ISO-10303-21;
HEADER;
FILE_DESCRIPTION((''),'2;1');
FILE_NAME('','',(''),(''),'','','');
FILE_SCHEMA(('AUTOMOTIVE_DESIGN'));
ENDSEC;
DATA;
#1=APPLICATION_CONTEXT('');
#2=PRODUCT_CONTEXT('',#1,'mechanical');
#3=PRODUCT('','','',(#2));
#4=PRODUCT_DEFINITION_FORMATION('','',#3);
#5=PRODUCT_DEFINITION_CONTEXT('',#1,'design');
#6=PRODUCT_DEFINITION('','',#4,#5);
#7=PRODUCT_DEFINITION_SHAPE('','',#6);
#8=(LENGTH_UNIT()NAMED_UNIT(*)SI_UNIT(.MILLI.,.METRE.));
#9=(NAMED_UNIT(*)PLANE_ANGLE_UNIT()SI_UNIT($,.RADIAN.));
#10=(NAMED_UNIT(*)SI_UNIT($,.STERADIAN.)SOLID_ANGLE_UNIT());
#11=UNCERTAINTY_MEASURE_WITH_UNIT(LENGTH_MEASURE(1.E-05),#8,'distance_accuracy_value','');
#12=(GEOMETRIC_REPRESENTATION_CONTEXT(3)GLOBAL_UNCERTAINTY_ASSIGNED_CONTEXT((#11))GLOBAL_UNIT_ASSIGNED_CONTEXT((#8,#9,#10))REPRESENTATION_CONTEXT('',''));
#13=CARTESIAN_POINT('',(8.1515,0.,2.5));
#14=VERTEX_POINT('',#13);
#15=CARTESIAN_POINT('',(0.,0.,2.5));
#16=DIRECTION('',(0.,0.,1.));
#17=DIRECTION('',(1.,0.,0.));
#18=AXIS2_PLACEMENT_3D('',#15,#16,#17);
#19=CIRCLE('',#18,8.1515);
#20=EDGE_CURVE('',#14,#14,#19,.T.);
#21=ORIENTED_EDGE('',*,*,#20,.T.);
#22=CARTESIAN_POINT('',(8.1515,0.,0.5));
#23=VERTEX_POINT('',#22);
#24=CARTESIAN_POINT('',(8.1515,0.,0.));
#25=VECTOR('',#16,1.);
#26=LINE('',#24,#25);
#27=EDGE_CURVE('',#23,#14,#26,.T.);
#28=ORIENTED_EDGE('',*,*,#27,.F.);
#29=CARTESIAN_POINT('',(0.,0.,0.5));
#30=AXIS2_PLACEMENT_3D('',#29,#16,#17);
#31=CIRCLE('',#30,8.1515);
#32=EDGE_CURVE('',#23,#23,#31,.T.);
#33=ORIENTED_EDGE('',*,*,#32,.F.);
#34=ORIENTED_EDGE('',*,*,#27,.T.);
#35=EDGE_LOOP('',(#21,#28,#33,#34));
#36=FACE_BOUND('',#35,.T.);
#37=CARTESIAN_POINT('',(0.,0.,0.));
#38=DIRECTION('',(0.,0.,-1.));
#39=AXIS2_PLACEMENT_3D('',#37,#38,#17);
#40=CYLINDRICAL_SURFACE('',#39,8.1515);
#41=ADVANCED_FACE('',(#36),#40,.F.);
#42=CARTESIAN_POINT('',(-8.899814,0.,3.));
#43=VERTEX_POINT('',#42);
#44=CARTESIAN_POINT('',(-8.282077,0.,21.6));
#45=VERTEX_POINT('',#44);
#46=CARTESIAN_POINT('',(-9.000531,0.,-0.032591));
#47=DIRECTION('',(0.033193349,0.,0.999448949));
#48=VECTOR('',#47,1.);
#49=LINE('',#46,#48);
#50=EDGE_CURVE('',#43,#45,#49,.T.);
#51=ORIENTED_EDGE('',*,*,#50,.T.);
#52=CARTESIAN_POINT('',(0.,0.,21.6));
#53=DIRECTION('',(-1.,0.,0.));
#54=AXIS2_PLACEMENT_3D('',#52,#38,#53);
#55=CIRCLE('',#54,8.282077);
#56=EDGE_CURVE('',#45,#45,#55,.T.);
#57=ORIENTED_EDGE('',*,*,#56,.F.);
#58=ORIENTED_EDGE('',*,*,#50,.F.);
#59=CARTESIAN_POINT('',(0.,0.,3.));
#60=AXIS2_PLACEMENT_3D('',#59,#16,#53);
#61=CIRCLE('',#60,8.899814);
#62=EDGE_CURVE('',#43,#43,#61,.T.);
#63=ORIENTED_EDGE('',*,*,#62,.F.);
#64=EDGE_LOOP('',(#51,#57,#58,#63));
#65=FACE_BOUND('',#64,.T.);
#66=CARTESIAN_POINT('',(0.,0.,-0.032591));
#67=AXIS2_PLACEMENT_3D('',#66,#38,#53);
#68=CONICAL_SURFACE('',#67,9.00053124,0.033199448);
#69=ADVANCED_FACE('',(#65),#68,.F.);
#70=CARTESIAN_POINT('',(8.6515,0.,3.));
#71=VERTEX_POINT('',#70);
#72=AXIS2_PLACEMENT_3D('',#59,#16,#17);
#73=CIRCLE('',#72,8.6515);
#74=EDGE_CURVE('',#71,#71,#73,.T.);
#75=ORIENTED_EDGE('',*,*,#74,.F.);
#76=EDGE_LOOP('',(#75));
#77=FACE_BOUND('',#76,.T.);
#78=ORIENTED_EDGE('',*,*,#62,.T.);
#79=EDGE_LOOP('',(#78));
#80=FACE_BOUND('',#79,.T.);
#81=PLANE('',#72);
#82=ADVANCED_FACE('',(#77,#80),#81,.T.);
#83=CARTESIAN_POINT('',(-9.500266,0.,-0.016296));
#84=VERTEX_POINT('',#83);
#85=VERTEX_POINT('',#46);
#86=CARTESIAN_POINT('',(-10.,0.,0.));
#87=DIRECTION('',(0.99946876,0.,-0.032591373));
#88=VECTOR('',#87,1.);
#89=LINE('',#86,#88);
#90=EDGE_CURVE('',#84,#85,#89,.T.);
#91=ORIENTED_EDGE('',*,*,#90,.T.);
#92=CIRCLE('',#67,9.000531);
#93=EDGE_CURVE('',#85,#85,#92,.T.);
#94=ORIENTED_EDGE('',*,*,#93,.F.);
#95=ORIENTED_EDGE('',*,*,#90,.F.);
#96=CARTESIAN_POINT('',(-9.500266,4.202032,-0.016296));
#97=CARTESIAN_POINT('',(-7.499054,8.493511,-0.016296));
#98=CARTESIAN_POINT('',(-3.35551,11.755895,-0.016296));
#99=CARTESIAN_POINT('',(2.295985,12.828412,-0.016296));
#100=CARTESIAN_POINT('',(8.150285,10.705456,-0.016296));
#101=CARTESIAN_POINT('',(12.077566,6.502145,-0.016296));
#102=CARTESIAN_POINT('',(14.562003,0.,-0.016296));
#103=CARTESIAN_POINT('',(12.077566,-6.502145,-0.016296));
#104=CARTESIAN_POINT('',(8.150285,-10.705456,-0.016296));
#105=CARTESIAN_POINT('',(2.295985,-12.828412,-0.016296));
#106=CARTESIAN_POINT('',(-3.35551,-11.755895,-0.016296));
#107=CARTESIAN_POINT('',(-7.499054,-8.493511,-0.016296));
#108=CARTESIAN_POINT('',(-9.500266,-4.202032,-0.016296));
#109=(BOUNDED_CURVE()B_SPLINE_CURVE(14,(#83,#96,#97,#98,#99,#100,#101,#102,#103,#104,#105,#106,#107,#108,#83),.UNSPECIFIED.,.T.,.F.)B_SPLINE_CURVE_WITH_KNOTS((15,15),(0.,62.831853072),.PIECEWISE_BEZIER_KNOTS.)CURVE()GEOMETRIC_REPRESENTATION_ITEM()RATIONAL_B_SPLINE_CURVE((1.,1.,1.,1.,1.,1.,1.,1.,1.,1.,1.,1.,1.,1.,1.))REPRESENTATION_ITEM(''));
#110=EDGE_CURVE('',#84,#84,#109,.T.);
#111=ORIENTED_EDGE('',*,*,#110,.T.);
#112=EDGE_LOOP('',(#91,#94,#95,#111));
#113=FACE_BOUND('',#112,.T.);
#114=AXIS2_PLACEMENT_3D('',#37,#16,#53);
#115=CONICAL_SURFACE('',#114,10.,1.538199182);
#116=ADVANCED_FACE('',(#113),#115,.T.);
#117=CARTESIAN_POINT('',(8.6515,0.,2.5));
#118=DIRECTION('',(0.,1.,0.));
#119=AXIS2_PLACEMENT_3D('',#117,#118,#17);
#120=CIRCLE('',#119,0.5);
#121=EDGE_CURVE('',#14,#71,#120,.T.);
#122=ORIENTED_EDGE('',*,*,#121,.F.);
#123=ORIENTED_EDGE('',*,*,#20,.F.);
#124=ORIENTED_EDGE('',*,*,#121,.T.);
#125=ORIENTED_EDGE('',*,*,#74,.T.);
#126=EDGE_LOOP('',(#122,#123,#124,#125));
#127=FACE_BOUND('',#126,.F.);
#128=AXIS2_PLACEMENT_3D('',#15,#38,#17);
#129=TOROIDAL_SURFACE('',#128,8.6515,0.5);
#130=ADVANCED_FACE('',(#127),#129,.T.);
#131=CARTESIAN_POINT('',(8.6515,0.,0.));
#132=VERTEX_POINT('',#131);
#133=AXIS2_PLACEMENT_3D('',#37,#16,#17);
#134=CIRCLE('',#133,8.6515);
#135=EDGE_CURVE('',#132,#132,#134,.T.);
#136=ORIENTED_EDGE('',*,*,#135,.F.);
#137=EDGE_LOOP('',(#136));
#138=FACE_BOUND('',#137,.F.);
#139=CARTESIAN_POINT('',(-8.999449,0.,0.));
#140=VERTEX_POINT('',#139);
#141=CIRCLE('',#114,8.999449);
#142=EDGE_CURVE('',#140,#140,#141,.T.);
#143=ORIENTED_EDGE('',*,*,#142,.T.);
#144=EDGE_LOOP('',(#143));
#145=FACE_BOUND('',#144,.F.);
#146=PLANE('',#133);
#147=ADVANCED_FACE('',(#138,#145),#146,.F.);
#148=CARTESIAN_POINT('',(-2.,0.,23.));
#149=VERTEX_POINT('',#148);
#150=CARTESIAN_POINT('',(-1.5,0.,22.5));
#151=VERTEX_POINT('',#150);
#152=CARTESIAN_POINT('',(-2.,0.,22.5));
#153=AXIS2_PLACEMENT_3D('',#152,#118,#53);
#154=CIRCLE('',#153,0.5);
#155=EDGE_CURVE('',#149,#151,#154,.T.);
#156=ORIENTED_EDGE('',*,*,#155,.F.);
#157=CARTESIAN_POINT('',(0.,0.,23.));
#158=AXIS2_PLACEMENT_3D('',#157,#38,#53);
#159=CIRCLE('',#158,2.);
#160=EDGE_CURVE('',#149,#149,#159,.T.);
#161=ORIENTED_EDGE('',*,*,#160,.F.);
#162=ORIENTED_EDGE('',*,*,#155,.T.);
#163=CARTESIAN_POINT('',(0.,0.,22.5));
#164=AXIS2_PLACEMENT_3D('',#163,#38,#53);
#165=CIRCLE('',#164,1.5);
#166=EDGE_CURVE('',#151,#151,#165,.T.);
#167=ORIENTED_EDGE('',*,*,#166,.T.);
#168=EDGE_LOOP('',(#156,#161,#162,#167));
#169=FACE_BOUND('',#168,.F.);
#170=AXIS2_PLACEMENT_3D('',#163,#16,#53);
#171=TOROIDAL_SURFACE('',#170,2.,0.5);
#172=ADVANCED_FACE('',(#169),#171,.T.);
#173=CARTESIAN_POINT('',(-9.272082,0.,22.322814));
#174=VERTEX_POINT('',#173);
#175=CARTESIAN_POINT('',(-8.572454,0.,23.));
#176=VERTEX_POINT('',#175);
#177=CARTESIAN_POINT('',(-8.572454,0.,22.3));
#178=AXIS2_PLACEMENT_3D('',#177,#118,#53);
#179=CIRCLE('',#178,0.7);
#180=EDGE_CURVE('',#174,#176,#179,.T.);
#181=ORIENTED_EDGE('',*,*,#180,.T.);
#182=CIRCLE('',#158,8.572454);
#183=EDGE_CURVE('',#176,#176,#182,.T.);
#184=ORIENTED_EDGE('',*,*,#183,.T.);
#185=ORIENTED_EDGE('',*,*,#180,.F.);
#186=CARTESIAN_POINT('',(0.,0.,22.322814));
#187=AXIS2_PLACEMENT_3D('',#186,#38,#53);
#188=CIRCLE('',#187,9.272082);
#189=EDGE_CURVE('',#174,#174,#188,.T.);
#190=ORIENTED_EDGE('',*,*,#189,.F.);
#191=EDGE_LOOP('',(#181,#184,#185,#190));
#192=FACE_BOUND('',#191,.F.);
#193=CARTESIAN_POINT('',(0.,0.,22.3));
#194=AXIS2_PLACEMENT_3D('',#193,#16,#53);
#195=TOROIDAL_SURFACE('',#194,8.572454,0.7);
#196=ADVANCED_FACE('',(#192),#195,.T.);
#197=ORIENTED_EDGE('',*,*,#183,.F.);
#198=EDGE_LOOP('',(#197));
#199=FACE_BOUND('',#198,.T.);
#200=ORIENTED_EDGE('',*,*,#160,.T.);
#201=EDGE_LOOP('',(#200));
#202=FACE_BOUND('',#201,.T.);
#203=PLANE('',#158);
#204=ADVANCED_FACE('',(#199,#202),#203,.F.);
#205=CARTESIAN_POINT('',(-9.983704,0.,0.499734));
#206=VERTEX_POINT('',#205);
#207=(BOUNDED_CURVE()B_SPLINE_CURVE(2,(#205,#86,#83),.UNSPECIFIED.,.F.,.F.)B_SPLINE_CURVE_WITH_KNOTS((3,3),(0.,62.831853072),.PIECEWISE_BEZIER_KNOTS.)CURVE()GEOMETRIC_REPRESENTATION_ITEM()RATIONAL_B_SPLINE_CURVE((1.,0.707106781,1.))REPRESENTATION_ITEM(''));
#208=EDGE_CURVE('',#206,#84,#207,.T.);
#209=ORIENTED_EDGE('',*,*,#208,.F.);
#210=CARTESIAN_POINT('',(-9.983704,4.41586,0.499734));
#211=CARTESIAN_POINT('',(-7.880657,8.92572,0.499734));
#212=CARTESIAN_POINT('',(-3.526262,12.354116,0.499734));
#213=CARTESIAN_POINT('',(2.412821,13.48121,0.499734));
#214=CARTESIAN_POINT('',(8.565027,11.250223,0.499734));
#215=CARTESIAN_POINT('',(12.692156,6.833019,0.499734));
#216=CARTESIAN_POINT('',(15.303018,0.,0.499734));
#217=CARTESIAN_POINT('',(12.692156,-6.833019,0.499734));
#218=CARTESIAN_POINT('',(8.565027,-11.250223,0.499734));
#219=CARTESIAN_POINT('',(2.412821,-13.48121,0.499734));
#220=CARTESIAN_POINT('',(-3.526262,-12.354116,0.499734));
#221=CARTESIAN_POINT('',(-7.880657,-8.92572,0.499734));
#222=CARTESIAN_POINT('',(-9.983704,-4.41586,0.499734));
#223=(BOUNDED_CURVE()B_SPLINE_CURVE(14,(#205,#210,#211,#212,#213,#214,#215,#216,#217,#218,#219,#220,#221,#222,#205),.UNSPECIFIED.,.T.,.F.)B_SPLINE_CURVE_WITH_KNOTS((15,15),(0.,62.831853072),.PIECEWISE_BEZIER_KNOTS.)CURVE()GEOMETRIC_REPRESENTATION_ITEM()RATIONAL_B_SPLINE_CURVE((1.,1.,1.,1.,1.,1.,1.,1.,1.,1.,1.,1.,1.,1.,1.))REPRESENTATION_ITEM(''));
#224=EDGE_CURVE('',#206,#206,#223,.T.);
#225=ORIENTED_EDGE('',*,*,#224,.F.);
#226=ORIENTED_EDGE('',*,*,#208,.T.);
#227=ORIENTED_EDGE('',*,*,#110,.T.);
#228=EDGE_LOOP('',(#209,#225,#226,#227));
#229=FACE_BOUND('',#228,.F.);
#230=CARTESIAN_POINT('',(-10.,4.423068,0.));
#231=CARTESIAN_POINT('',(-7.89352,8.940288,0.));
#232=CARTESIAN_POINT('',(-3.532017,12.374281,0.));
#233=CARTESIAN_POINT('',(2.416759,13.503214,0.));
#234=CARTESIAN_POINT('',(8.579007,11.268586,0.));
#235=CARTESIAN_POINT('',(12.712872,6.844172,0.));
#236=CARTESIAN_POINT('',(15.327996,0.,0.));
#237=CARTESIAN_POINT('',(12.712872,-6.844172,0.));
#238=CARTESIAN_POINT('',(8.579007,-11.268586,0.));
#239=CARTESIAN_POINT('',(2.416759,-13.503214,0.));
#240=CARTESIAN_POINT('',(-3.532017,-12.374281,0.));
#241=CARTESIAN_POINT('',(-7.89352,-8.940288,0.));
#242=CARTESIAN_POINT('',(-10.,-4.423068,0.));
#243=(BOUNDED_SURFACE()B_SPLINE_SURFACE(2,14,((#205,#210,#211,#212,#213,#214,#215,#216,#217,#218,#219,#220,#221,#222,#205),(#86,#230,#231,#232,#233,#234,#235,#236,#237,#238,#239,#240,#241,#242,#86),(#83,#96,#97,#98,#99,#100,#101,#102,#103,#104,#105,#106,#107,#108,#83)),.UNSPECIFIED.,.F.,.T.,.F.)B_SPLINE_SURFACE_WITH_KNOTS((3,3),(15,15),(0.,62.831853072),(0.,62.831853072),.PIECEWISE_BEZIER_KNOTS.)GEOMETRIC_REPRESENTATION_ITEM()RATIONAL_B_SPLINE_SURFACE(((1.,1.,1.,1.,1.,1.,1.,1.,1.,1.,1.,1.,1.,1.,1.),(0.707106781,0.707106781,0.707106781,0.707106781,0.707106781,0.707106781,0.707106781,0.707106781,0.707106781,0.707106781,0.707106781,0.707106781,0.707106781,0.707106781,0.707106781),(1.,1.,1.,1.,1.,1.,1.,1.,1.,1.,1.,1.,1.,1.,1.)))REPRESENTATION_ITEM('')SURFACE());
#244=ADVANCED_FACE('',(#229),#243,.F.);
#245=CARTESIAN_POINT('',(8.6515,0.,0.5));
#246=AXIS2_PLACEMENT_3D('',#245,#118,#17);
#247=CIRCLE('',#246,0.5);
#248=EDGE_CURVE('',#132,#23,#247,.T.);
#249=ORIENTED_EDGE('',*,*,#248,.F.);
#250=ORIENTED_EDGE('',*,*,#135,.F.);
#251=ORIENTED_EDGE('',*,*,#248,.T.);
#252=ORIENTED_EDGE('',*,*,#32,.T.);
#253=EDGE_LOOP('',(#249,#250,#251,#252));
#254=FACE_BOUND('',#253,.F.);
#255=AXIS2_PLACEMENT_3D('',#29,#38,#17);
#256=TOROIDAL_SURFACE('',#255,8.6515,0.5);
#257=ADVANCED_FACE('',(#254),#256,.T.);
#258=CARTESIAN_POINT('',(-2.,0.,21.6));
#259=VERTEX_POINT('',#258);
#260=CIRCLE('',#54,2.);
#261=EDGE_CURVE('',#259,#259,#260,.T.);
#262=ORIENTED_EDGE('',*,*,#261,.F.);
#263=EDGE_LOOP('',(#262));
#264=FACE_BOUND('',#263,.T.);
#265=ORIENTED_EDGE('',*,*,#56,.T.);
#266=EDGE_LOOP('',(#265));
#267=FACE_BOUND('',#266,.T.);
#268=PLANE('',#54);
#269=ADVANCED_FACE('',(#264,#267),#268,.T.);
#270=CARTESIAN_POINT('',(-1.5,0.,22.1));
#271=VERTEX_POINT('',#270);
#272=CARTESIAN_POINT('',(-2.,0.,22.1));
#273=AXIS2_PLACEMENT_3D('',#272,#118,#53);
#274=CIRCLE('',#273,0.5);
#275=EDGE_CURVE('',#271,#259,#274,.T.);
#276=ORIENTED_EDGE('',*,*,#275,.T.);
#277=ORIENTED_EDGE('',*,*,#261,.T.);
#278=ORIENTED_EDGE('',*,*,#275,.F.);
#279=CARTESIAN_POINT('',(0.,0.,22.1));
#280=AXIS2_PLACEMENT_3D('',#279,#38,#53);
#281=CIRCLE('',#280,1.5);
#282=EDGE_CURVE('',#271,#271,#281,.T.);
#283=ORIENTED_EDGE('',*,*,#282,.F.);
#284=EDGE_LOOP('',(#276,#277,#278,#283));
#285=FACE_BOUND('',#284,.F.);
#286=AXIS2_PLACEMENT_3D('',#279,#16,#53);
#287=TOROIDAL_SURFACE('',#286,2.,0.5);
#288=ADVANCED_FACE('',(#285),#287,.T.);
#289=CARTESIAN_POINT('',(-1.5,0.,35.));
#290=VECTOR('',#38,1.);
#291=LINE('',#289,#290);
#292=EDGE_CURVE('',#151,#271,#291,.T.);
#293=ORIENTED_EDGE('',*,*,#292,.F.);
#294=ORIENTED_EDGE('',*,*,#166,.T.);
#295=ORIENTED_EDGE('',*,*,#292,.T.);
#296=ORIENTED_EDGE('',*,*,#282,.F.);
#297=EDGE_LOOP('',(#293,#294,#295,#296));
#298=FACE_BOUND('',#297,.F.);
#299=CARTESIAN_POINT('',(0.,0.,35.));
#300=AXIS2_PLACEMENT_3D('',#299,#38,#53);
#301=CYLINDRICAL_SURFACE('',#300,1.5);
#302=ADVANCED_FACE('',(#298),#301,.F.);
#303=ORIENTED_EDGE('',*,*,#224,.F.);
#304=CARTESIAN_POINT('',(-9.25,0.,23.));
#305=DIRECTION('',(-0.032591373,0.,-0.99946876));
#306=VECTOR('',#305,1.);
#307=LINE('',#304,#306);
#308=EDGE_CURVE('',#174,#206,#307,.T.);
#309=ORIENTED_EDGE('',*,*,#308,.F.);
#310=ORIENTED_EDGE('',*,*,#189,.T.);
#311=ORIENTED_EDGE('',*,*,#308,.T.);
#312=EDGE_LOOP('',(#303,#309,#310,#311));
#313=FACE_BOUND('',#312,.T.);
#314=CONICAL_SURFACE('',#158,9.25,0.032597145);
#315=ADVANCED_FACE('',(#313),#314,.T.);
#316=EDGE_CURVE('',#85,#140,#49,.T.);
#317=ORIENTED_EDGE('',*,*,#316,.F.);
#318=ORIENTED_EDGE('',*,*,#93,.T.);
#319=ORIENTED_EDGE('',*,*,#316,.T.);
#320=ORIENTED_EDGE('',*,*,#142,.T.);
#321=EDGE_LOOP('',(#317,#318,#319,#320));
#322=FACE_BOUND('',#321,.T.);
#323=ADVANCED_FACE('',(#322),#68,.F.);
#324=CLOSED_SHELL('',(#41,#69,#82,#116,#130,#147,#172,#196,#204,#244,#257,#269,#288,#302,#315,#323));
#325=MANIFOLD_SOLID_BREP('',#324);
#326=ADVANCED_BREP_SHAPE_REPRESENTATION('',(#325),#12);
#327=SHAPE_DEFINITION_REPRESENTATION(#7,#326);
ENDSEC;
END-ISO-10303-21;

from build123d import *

# Parameters (mm, degrees)
F1_R     = 9.0005312399
F1_R_2   = 8.1515
F4_DEPTH = 3
F7_D     = 3
F7_DEPTH = 12
F7_TIP   = 0.9012909285
F8_R     = 0.7
F9_R     = 0.5


with BuildPart() as f2:
    # F0 (on Front) → F2 (revolve)
    with BuildSketch(Plane.XZ):
        Polygon((0, 21.6), (0, 23), (-9.25, 23), (-10, 0), (-9.0005312399, -0.0325913726), (-8.2820771734, 21.6), align=None)
    revolve(axis=Axis((0, 0, 12.5640318729), (0, 0, -1)))

    # F0 (on Front) → F3 (revolve)
    with BuildSketch(Plane.XZ):
        Polygon((0, 21.6), (0, 23), (-9.25, 23), (-10, 0), (-9.0005312399, -0.0325913726), (-8.2820771734, 21.6), align=None)
    revolve(axis=Axis((0, 0, 12.5640318729), (0, 0, -1)))

    # F1 (on Top) → F4 (join)
    with BuildSketch(Plane.XY):
        Circle(F1_R)
        Circle(F1_R_2, mode=Mode.SUBTRACT)
    extrude(amount=F4_DEPTH)

    # F7
    with Locations(Plane.XY.offset(23)):
        with Locations((0, 0)):
            Hole(F7_D / 2, depth=F7_DEPTH)
            with Locations((0, 0, -(F7_DEPTH + F7_TIP / 2))):  # 118° drill point
                Cone(0, F7_D / 2, F7_TIP, mode=Mode.SUBTRACT)

    # F8
    f8_edges = [f2.edges().sort_by_distance(p)[0] for p in [
        (9.25, 0, 23),
    ]]
    fillet(f8_edges, radius=F8_R)

    # F9
    f9_edges = [f2.edges().sort_by_distance(p)[0] for p in [
        (10, 0, 0),
        (-8.1515, 0, 0),
        (-8.1515, 0, 3),
        (-1.5, 0, 23),
        (-1.5, 0, 21.6),
    ]]
    fillet(f9_edges, radius=F9_R)


solid = f2.part
